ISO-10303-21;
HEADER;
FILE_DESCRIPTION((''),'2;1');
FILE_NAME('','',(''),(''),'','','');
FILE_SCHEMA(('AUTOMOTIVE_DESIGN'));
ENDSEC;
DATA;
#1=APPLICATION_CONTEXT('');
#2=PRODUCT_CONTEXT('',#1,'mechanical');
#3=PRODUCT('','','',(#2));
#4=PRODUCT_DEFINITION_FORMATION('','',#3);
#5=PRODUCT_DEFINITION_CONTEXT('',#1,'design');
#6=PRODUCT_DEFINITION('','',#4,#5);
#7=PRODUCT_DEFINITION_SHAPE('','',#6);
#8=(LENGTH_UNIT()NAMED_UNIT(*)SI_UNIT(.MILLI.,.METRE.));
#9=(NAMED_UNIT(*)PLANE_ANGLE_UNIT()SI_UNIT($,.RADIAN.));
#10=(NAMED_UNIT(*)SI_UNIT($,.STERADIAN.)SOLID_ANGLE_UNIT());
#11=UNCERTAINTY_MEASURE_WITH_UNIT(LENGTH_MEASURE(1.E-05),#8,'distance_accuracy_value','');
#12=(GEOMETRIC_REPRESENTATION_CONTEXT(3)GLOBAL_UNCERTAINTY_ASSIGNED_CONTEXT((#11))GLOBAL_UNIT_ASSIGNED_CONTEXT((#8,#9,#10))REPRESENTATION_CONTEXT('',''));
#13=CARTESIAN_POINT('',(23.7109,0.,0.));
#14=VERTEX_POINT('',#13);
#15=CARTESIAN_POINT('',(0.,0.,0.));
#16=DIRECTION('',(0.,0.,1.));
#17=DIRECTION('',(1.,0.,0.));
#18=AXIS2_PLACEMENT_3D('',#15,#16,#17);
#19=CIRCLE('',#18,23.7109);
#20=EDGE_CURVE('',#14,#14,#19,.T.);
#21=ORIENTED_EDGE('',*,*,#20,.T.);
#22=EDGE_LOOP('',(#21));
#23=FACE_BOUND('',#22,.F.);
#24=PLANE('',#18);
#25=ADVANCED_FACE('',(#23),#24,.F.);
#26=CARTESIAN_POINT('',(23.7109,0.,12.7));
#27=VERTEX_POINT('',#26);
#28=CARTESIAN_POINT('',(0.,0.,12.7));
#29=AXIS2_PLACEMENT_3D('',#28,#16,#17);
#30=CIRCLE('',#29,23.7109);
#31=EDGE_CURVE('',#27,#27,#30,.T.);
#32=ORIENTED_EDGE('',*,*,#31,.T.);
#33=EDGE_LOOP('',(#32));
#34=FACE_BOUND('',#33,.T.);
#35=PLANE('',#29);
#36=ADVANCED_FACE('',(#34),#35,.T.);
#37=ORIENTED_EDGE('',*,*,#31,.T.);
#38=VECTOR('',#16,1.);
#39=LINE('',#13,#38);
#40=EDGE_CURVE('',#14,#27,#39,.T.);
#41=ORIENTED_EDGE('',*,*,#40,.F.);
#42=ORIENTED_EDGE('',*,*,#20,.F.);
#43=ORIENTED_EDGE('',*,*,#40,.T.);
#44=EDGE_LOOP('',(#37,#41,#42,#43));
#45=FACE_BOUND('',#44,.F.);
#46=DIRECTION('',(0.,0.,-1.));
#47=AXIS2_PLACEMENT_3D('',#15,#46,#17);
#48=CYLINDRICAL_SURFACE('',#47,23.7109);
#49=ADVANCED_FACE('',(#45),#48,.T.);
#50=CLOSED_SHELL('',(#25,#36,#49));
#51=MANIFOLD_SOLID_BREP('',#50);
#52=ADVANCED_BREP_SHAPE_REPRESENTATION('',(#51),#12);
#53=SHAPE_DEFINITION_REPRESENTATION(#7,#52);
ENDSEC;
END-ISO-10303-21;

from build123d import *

# Parameters (mm, degrees)
F0_R     = 23.7109
F1_DEPTH = 12.7


# Not quite as in the source:
# - a feature of the source that left no trace in its solid (it failed there, or was rolled back) is left out


with BuildPart() as f1:
    # F0 (on Top) → F1 (new body)
    with BuildSketch(Plane.XY):
        Circle(F0_R)
    extrude(amount=F1_DEPTH)


solid = f1.part
